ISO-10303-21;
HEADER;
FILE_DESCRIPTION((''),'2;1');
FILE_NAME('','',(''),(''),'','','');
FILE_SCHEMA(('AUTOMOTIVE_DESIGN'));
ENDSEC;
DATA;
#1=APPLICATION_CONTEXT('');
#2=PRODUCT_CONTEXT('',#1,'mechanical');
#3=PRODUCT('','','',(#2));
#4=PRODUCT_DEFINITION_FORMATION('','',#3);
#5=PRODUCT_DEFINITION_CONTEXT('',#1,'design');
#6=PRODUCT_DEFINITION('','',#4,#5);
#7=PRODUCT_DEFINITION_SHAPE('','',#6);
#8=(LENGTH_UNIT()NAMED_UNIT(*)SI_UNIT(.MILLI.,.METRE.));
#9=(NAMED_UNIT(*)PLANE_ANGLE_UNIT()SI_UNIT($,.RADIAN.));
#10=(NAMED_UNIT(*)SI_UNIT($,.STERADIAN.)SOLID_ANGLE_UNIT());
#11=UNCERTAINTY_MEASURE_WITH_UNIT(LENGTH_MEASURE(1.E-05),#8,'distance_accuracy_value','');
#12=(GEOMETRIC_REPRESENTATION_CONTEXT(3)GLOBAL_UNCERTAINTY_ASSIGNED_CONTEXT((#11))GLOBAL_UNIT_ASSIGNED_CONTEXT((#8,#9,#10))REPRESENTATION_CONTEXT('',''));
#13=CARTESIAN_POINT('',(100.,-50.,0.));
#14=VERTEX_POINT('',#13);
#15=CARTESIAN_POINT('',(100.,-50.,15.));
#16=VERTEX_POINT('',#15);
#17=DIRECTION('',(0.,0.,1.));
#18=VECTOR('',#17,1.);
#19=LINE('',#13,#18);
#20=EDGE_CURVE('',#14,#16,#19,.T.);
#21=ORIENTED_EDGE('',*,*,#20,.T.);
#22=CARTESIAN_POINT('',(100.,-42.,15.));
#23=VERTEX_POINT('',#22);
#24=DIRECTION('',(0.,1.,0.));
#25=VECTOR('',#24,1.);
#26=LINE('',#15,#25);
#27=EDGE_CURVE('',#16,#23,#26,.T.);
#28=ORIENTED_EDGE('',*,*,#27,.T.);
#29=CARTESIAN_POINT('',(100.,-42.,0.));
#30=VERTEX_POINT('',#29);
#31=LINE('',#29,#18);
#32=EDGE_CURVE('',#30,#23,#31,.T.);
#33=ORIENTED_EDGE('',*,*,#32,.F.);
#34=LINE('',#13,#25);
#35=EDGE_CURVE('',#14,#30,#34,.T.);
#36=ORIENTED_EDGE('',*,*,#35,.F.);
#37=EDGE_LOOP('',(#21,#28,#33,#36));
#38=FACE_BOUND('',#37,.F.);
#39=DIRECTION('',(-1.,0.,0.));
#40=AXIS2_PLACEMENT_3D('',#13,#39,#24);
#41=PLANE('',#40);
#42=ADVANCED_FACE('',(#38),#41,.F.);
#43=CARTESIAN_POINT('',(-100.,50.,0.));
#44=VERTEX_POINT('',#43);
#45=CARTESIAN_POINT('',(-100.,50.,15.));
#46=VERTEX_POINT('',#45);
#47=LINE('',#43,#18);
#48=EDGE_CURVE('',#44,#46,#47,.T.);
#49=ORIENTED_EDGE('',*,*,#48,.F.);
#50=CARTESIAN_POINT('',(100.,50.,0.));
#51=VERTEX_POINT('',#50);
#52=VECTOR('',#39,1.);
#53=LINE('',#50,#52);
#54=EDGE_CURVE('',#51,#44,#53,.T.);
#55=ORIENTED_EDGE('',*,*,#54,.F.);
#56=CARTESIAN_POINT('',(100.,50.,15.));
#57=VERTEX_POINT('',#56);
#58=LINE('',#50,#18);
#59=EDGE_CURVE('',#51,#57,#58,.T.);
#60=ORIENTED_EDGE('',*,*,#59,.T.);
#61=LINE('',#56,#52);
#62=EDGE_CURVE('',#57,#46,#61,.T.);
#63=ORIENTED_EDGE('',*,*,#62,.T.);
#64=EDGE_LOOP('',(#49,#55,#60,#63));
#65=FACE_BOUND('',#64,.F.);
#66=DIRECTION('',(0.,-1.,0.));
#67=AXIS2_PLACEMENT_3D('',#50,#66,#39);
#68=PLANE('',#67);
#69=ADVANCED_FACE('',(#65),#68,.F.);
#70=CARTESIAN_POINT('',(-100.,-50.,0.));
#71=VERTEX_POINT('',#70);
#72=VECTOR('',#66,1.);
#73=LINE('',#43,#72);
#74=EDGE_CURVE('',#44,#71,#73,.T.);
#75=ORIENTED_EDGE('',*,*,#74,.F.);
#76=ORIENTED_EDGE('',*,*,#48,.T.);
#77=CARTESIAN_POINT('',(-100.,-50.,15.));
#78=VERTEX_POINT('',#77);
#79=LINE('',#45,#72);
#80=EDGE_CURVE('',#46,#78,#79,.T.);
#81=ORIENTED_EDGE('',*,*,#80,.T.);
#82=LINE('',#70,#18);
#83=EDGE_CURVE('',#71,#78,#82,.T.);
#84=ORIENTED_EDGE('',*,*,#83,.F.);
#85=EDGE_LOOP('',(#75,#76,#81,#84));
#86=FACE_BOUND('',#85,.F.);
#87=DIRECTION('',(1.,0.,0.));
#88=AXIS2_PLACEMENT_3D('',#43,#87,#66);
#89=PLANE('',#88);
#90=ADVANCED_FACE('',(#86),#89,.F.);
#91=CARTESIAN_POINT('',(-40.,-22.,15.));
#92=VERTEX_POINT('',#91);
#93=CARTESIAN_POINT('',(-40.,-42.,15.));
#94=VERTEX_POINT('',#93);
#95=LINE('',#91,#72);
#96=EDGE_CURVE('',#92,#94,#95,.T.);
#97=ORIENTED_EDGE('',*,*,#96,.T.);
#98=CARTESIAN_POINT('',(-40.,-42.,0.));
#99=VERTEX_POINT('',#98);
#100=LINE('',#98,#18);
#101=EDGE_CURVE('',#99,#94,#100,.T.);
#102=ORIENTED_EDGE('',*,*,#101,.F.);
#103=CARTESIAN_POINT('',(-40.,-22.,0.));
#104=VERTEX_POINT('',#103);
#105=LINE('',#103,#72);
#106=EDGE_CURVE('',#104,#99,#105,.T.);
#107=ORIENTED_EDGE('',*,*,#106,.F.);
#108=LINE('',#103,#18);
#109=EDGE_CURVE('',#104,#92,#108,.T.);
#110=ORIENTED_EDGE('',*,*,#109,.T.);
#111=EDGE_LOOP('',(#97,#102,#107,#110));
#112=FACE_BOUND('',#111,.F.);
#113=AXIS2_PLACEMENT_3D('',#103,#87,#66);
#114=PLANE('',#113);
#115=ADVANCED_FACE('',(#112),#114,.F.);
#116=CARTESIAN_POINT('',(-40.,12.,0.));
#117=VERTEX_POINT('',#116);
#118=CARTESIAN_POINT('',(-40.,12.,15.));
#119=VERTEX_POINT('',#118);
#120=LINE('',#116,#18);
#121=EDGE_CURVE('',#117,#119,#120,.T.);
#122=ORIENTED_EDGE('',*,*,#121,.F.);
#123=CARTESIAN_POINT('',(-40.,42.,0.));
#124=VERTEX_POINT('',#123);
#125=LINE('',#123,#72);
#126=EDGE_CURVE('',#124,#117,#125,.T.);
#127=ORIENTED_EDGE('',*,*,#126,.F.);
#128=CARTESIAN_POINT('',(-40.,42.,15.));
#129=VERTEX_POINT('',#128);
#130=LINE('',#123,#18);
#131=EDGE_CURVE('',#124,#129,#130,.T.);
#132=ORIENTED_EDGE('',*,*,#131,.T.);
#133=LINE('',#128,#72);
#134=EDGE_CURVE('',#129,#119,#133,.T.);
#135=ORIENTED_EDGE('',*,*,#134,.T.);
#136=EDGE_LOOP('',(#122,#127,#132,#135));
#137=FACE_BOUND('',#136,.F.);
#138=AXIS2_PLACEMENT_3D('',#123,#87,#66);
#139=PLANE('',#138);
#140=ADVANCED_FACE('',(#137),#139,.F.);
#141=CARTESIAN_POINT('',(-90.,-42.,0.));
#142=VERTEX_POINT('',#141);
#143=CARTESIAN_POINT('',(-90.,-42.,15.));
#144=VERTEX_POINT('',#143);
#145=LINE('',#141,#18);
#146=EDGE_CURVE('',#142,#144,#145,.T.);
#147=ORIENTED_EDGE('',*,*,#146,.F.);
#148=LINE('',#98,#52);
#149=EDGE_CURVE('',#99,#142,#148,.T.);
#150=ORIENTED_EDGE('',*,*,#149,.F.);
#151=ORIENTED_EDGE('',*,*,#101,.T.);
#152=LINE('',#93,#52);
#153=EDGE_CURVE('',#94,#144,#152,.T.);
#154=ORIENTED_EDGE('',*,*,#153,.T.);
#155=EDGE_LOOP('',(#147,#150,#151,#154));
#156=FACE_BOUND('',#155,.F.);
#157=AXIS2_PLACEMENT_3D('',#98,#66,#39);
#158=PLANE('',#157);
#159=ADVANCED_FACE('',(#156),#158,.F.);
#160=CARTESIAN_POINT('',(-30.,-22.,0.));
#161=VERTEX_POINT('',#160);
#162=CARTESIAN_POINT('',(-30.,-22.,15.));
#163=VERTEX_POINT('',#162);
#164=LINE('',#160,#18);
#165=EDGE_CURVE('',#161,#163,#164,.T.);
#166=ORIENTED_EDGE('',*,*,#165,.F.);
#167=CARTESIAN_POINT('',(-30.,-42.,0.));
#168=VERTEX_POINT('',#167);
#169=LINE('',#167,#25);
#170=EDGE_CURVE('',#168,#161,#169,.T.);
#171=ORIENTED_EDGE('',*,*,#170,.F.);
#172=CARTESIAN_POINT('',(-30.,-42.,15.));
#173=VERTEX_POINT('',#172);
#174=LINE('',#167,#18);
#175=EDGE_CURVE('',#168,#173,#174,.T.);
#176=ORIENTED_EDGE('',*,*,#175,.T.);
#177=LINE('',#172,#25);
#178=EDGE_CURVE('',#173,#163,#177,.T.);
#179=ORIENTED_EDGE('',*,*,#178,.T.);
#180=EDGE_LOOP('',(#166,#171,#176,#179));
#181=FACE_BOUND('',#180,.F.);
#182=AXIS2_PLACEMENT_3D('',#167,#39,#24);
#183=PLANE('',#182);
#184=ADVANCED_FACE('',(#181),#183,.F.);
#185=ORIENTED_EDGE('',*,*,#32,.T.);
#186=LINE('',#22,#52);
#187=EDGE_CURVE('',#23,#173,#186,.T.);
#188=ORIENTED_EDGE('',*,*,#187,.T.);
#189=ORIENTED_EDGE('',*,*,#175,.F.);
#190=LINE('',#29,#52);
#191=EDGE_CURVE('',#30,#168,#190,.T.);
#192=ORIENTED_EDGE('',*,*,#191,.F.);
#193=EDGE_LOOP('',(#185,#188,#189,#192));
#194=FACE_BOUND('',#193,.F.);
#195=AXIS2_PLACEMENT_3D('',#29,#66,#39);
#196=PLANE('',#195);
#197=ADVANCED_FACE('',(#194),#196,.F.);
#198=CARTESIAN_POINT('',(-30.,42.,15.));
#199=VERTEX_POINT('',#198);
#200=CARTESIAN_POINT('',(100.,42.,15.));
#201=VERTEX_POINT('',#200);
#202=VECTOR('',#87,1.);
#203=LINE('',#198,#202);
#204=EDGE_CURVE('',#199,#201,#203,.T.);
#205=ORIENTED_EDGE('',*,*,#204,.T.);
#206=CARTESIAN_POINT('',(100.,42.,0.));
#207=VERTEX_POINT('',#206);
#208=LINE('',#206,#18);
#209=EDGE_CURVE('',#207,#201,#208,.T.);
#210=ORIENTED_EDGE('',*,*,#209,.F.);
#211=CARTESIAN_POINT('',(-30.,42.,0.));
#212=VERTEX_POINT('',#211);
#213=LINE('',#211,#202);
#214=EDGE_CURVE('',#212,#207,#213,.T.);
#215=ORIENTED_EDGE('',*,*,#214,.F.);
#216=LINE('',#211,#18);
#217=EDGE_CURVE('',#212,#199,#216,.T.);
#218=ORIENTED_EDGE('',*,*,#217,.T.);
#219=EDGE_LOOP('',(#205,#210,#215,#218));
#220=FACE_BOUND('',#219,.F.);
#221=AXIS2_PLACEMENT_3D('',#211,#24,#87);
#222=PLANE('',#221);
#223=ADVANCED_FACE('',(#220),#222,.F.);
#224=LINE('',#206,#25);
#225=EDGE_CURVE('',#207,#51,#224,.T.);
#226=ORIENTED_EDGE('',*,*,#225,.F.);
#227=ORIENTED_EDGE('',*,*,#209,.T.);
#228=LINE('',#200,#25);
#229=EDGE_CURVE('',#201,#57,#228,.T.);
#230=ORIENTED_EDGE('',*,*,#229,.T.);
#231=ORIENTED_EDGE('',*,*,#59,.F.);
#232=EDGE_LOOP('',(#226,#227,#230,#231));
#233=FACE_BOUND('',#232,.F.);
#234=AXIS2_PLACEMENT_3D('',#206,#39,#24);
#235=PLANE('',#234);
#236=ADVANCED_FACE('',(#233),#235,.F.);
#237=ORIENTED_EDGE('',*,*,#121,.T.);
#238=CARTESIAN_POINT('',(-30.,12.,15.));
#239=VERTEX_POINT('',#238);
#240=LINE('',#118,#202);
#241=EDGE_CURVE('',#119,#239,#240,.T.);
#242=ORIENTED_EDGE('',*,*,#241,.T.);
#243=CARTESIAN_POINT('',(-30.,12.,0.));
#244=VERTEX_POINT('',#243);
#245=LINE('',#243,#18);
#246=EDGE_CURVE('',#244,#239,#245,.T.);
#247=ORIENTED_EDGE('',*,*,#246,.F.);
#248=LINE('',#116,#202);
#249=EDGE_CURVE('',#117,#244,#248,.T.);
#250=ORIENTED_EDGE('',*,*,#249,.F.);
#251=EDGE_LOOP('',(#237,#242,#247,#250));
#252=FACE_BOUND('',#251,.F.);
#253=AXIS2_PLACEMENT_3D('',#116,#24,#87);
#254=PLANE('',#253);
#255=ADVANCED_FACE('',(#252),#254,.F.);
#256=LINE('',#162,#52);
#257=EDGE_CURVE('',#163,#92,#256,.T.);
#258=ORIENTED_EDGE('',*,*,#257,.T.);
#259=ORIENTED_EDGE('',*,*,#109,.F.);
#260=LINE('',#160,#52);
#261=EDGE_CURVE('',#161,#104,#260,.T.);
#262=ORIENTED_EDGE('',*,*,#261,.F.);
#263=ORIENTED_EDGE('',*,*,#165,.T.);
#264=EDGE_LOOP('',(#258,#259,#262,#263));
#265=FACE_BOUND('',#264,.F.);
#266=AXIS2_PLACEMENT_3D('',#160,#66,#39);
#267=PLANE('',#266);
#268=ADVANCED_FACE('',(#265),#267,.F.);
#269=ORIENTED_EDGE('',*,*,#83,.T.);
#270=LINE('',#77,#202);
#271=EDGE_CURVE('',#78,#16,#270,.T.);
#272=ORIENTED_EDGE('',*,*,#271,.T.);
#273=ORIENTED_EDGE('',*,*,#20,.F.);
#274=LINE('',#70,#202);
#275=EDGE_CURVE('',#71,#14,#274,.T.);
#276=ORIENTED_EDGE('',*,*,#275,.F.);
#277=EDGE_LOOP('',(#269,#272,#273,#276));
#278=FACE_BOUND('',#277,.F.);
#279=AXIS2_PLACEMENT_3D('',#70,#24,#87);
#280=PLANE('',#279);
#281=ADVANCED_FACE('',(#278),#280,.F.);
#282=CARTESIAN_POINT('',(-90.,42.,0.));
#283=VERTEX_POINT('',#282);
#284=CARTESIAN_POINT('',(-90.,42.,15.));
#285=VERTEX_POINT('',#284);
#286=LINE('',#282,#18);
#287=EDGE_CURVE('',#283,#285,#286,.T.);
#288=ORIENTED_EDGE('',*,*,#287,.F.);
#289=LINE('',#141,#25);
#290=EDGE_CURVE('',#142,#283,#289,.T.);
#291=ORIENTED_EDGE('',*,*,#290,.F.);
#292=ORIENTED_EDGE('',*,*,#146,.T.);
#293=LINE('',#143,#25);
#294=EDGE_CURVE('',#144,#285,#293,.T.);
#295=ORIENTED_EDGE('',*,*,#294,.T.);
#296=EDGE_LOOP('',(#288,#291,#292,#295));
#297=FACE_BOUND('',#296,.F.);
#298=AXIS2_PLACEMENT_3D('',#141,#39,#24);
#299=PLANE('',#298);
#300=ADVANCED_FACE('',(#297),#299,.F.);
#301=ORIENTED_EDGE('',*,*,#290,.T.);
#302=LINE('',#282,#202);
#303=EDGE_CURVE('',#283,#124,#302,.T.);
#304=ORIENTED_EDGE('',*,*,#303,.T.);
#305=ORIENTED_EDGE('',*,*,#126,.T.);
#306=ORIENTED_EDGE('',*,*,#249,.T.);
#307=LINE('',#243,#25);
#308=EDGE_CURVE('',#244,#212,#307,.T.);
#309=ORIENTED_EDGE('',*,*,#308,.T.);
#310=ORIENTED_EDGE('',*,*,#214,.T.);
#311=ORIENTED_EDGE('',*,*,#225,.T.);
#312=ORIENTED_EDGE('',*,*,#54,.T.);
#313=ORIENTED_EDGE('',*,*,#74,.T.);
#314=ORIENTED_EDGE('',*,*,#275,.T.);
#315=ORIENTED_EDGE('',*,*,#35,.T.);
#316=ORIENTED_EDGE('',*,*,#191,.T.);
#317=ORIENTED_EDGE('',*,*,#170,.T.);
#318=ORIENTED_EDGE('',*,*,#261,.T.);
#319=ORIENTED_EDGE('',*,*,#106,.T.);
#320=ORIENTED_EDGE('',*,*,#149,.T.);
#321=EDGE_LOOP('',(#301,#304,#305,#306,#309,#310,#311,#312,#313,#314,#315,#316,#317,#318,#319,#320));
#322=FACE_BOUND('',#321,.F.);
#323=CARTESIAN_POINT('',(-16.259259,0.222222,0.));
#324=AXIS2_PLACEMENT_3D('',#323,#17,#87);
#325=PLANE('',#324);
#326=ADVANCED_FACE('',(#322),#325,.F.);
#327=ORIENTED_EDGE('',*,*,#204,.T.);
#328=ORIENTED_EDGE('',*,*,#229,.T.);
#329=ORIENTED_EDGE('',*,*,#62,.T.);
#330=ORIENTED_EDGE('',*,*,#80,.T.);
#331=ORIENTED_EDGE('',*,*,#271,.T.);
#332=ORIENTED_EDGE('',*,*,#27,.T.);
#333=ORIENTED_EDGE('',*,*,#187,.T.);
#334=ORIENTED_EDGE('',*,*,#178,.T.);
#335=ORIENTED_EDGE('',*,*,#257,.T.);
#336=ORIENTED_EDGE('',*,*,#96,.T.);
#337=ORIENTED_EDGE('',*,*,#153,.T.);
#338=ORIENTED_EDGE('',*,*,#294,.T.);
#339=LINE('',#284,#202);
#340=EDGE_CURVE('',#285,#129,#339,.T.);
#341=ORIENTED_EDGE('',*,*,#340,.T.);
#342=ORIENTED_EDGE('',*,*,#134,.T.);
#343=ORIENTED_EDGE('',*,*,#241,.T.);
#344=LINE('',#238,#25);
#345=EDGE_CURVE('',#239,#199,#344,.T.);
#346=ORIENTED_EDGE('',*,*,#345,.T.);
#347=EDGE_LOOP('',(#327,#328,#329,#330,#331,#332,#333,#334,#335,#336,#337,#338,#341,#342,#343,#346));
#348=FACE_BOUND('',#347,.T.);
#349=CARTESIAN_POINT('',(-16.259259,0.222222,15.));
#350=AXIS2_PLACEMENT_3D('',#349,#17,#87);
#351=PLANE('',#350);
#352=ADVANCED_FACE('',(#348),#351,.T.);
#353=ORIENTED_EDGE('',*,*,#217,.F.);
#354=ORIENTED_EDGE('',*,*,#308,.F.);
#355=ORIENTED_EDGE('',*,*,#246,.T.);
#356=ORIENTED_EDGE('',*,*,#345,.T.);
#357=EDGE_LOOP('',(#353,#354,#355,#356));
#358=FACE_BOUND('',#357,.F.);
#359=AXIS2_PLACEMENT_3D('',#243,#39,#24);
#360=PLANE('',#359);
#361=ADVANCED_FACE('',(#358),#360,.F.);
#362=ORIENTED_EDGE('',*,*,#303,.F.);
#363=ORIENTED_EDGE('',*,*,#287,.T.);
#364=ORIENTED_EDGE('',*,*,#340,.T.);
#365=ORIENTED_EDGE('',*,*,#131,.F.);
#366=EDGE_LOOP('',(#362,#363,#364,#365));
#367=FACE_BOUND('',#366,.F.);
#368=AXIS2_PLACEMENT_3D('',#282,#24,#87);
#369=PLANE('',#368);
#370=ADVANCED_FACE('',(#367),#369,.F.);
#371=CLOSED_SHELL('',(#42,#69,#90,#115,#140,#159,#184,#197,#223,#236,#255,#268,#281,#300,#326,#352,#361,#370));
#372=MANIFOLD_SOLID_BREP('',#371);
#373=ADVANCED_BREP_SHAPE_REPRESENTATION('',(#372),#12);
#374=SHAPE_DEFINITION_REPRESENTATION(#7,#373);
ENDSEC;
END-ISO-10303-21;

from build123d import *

# Parameters (mm, degrees)
F1_DEPTH = 15


# Not quite as in the source:
# - a feature names something its author has since deleted; it is built from what else it names


with BuildPart() as f1:
    # F0 (on Top) → F1 (new body)
    with BuildSketch(Plane.XY):
        Polygon((-100, -50), (100, -50), (100, -42), (-30, -42), (-30, -22), (-40, -22), (-40, -42), (-90, -42), (-90, 42), (-40, 42), (-40, 12), (-30, 12), (-30, 42), (-6.4, 42), (100, 42), (100, 50), (-100, 50), align=None)
    extrude(amount=F1_DEPTH)


solid = f1.part
